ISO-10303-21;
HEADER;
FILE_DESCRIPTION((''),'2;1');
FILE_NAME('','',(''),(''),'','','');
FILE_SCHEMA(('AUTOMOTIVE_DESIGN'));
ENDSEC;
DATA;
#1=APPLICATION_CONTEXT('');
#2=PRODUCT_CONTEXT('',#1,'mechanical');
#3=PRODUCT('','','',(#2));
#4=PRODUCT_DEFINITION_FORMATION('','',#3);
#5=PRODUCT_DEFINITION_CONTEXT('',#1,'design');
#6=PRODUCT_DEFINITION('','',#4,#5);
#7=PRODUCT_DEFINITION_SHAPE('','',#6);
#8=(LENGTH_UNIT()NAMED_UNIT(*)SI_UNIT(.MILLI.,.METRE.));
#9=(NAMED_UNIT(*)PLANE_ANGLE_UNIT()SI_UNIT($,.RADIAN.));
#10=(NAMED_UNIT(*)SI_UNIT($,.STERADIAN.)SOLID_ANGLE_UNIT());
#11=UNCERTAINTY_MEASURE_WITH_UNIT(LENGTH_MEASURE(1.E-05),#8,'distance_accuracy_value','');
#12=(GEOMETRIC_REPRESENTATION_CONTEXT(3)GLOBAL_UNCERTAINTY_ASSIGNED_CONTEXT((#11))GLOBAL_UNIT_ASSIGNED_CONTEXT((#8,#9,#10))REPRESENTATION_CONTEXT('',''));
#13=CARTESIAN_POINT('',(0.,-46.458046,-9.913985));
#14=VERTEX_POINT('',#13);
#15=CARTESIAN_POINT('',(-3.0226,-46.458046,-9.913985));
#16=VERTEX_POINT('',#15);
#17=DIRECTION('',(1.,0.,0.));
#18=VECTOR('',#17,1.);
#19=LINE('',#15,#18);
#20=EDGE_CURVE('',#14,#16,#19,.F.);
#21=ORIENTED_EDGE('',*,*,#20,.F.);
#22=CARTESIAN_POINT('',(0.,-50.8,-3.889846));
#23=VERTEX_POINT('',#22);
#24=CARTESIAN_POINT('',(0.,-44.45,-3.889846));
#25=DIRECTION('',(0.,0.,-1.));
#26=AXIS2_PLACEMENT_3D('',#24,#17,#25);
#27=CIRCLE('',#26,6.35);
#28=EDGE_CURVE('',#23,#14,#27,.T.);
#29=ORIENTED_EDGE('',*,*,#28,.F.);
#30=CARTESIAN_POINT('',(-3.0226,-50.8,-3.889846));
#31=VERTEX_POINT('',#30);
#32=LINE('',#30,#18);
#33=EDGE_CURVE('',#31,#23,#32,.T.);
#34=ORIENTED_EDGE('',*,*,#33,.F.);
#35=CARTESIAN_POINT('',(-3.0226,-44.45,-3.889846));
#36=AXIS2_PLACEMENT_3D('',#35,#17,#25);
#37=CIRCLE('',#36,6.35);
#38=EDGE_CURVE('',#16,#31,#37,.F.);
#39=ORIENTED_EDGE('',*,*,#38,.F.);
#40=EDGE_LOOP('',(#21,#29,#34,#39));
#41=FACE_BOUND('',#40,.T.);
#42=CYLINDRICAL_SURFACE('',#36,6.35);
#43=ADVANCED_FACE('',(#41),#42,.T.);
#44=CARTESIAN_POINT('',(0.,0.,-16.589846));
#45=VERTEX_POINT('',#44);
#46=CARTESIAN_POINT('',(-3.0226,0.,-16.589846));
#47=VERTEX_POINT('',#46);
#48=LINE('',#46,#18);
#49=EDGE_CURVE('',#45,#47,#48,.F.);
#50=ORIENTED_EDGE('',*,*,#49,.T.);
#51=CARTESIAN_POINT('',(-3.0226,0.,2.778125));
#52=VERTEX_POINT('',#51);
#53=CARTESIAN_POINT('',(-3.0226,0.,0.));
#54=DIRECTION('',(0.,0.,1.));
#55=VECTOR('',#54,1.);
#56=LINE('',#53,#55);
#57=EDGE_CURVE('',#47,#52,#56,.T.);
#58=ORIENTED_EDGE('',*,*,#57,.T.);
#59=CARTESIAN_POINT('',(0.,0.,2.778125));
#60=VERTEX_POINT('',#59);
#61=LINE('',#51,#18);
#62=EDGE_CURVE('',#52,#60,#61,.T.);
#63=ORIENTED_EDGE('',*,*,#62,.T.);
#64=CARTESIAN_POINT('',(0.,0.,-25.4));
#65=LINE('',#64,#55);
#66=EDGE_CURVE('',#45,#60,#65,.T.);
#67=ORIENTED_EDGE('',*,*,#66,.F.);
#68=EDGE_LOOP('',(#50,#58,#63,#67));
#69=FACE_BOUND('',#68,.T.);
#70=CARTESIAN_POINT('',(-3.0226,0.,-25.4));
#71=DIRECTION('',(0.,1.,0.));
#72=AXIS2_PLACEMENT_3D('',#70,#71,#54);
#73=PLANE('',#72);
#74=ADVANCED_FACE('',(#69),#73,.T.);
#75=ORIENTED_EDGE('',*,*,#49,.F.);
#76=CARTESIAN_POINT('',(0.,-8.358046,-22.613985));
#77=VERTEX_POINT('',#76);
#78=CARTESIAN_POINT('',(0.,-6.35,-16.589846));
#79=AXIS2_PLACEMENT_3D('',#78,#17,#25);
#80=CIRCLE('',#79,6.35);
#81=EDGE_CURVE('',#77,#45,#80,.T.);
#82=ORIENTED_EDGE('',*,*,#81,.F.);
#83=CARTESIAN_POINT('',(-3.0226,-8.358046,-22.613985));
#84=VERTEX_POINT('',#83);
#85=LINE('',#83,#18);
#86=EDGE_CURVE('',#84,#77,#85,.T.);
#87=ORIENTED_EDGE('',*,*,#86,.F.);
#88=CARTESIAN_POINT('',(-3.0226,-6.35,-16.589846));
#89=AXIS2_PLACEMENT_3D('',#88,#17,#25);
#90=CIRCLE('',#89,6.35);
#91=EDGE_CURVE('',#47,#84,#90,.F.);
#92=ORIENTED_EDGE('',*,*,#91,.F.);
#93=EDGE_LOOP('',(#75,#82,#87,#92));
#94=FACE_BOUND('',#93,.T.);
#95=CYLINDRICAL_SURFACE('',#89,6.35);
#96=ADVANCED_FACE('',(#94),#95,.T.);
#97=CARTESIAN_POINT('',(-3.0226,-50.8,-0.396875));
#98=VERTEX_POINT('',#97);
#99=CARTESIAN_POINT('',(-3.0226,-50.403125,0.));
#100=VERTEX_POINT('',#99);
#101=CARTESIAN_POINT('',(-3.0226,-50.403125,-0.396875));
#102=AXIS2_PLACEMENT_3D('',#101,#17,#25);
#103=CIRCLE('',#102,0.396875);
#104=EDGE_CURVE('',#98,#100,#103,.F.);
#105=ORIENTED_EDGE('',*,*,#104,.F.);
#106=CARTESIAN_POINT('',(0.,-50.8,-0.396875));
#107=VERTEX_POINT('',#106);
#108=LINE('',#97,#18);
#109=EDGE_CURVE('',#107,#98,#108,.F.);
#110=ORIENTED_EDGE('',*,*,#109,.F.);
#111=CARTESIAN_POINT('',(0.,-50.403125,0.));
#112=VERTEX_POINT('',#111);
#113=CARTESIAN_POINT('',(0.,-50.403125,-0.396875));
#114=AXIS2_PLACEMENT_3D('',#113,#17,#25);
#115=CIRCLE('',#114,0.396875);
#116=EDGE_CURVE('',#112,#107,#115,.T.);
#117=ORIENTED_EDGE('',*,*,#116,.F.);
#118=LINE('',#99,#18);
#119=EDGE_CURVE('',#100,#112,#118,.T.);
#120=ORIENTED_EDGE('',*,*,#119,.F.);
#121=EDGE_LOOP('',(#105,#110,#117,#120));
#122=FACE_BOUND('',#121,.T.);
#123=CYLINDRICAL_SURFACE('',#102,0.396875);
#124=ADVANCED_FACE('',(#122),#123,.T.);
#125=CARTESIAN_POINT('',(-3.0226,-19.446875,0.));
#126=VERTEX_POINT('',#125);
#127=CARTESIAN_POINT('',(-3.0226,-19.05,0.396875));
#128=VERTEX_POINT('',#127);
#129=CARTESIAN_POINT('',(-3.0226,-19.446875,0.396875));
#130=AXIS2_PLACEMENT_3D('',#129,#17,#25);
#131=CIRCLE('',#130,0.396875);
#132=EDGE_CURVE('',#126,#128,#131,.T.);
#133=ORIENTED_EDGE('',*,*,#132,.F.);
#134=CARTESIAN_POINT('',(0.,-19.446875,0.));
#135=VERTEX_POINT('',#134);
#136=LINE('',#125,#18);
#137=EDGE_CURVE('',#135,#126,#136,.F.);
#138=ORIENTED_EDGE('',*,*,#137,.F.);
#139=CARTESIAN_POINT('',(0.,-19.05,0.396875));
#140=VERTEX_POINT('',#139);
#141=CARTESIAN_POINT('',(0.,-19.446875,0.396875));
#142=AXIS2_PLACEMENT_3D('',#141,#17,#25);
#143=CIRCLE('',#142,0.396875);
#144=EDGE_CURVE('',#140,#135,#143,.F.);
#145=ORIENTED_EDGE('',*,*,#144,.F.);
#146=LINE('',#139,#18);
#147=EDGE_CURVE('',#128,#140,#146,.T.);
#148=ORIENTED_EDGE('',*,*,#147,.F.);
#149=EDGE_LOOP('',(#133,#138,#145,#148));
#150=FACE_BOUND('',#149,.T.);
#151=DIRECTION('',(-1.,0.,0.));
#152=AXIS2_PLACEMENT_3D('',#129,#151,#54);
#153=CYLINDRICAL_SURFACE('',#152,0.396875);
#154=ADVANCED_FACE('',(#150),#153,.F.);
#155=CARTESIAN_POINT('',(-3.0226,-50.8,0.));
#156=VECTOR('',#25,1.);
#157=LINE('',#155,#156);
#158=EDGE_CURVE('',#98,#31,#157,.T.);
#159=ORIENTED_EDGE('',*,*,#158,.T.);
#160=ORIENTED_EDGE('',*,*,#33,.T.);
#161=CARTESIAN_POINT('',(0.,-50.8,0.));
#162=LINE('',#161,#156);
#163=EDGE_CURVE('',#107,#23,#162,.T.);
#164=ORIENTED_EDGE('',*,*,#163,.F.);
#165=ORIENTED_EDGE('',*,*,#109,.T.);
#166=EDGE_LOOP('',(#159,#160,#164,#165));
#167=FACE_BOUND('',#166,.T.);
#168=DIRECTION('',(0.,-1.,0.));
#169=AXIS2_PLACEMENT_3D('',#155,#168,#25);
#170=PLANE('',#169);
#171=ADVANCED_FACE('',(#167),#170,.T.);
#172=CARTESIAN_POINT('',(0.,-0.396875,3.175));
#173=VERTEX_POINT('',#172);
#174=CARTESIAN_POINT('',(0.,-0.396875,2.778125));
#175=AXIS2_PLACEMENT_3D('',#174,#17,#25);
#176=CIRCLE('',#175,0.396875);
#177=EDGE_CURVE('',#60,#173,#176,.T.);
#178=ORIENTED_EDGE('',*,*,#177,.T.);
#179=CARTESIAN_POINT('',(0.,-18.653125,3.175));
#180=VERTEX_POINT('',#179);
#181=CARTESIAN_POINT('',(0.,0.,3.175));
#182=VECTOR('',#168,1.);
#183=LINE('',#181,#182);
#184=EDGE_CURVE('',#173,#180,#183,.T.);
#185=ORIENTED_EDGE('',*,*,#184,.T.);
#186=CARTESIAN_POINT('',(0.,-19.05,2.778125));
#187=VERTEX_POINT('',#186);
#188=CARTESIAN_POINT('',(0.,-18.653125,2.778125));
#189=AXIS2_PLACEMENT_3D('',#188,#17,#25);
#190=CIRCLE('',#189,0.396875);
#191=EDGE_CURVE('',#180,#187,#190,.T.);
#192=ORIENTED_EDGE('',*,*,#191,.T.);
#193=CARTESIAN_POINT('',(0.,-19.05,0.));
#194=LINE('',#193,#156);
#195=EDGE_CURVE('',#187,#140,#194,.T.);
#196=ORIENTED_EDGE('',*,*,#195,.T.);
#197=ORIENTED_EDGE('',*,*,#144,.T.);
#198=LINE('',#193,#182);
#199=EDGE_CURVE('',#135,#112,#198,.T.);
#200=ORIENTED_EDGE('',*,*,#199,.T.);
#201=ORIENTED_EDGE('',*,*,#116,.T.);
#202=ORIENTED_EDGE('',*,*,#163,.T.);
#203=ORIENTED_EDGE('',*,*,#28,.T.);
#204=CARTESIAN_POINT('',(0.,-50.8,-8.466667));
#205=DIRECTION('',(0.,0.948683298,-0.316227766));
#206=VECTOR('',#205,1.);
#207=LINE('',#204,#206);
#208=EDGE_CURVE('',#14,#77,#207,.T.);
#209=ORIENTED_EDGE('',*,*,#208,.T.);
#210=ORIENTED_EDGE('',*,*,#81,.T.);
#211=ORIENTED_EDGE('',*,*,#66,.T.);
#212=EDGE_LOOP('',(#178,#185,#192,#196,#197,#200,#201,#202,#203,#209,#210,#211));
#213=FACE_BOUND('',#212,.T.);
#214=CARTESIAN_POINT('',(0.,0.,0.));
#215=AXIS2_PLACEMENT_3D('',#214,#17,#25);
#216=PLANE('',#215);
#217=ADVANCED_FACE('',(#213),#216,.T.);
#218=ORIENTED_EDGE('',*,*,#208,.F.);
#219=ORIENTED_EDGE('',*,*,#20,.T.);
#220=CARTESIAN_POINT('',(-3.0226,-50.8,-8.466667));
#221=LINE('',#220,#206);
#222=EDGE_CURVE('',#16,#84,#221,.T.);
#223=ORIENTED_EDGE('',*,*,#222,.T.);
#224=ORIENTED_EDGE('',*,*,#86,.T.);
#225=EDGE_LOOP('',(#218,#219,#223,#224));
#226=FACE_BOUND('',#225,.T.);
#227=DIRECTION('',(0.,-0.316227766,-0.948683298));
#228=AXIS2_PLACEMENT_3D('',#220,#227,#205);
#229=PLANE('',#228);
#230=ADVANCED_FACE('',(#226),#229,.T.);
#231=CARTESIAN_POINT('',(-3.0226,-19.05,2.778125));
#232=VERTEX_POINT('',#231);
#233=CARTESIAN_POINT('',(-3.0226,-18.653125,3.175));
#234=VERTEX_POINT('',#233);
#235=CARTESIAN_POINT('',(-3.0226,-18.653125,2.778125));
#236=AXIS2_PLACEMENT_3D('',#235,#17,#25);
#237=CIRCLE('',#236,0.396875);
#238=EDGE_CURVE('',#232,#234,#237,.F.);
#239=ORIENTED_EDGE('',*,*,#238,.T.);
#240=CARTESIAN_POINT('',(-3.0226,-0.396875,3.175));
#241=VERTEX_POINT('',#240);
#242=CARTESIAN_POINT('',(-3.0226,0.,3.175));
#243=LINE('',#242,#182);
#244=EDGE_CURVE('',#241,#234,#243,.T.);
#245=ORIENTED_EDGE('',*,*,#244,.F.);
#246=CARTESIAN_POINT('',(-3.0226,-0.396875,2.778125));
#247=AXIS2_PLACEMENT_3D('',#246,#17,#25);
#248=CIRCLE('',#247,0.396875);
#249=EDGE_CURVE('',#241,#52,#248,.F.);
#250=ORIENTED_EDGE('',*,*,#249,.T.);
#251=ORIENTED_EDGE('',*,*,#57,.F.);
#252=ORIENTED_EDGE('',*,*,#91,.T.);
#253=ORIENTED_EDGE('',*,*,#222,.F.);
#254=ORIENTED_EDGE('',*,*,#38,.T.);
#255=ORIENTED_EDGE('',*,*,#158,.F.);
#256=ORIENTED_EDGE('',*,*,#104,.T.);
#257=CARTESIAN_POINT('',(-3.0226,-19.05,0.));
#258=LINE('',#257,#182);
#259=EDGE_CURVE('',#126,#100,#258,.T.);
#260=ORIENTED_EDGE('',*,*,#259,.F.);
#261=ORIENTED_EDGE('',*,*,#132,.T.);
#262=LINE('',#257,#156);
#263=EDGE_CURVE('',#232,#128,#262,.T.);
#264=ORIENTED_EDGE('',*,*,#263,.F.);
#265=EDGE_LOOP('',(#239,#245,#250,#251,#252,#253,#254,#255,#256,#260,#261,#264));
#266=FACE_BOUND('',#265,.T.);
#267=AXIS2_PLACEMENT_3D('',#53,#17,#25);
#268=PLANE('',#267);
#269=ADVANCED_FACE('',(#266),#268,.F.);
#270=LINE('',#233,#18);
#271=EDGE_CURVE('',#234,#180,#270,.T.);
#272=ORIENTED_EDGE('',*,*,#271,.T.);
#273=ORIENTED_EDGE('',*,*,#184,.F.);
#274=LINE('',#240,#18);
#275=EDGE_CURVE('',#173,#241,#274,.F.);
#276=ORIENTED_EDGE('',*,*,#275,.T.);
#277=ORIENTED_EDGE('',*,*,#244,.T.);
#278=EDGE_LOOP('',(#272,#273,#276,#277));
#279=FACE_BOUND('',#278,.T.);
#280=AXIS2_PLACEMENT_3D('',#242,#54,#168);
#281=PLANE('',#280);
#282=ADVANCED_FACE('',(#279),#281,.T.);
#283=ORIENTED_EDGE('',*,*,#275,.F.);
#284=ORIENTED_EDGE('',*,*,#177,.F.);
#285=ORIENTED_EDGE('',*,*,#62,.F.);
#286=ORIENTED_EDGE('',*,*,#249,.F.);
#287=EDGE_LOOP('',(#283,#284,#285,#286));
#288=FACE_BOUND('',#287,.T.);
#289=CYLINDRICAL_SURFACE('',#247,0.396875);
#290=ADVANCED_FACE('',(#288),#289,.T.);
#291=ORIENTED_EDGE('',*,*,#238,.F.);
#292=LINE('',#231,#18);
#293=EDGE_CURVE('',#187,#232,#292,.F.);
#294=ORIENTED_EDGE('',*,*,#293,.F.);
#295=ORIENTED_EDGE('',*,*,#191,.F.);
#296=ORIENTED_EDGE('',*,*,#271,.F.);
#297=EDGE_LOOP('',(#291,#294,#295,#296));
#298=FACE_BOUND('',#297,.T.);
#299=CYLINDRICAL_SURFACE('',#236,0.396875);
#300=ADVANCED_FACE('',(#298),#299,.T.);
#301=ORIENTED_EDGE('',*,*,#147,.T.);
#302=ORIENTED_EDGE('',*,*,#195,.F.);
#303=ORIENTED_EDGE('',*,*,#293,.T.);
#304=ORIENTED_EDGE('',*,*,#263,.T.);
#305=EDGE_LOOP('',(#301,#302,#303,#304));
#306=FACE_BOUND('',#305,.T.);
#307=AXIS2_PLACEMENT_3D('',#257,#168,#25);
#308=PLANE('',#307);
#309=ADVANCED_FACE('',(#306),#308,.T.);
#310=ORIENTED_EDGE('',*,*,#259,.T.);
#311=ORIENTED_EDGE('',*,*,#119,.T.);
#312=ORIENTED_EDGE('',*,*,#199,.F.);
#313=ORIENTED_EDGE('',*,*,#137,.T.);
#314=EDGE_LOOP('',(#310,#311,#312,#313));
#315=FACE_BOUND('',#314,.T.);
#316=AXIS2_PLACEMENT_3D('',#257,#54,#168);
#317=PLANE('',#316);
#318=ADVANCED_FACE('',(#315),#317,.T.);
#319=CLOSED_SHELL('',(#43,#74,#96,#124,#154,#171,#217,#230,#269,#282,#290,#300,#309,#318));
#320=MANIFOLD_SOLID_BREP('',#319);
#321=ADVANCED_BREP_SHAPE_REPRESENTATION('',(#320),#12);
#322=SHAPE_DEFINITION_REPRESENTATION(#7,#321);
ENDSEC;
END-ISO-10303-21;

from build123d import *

# Parameters (mm, degrees)
BASE_FLANGE1_DEPTH = 3.0226
FILLET1_R          = 6.35
FILLET2_R          = 0.396875


# Sheet-metal steps are written as plain solids
with BuildPart() as part:
    # Sketch1 → Base-Flange1 (new body)
    with BuildSketch(Plane(origin=(0, 0, 0), x_dir=(0, 0, -1), z_dir=(1, 0, 0))):
        Polygon((0, -19.05), (0, -50.8), (8.466666667, -50.8), (25.4, 0), (0, 0), (-3.175, 0), (-3.175, -19.05), align=None)
    extrude(amount=-BASE_FLANGE1_DEPTH)

    # Fillet1
    fillet1_edges = [part.edges().sort_by_distance(p)[0] for p in [
        (-1.5113, 0, -25.4),
        (-1.5113, -50.8, -8.466666667),
    ]]
    fillet(fillet1_edges, radius=FILLET1_R)

    # Fillet2
    fillet2_edges = [part.edges().sort_by_distance(p)[0] for p in [
        (-1.5113, -50.8, 0),
        (-1.5113, -19.05, 0),
        (-1.5113, -19.05, 3.175),
        (-1.5113, 0, 3.175),
    ]]
    fillet(fillet2_edges, radius=FILLET2_R)


solid = part.part
